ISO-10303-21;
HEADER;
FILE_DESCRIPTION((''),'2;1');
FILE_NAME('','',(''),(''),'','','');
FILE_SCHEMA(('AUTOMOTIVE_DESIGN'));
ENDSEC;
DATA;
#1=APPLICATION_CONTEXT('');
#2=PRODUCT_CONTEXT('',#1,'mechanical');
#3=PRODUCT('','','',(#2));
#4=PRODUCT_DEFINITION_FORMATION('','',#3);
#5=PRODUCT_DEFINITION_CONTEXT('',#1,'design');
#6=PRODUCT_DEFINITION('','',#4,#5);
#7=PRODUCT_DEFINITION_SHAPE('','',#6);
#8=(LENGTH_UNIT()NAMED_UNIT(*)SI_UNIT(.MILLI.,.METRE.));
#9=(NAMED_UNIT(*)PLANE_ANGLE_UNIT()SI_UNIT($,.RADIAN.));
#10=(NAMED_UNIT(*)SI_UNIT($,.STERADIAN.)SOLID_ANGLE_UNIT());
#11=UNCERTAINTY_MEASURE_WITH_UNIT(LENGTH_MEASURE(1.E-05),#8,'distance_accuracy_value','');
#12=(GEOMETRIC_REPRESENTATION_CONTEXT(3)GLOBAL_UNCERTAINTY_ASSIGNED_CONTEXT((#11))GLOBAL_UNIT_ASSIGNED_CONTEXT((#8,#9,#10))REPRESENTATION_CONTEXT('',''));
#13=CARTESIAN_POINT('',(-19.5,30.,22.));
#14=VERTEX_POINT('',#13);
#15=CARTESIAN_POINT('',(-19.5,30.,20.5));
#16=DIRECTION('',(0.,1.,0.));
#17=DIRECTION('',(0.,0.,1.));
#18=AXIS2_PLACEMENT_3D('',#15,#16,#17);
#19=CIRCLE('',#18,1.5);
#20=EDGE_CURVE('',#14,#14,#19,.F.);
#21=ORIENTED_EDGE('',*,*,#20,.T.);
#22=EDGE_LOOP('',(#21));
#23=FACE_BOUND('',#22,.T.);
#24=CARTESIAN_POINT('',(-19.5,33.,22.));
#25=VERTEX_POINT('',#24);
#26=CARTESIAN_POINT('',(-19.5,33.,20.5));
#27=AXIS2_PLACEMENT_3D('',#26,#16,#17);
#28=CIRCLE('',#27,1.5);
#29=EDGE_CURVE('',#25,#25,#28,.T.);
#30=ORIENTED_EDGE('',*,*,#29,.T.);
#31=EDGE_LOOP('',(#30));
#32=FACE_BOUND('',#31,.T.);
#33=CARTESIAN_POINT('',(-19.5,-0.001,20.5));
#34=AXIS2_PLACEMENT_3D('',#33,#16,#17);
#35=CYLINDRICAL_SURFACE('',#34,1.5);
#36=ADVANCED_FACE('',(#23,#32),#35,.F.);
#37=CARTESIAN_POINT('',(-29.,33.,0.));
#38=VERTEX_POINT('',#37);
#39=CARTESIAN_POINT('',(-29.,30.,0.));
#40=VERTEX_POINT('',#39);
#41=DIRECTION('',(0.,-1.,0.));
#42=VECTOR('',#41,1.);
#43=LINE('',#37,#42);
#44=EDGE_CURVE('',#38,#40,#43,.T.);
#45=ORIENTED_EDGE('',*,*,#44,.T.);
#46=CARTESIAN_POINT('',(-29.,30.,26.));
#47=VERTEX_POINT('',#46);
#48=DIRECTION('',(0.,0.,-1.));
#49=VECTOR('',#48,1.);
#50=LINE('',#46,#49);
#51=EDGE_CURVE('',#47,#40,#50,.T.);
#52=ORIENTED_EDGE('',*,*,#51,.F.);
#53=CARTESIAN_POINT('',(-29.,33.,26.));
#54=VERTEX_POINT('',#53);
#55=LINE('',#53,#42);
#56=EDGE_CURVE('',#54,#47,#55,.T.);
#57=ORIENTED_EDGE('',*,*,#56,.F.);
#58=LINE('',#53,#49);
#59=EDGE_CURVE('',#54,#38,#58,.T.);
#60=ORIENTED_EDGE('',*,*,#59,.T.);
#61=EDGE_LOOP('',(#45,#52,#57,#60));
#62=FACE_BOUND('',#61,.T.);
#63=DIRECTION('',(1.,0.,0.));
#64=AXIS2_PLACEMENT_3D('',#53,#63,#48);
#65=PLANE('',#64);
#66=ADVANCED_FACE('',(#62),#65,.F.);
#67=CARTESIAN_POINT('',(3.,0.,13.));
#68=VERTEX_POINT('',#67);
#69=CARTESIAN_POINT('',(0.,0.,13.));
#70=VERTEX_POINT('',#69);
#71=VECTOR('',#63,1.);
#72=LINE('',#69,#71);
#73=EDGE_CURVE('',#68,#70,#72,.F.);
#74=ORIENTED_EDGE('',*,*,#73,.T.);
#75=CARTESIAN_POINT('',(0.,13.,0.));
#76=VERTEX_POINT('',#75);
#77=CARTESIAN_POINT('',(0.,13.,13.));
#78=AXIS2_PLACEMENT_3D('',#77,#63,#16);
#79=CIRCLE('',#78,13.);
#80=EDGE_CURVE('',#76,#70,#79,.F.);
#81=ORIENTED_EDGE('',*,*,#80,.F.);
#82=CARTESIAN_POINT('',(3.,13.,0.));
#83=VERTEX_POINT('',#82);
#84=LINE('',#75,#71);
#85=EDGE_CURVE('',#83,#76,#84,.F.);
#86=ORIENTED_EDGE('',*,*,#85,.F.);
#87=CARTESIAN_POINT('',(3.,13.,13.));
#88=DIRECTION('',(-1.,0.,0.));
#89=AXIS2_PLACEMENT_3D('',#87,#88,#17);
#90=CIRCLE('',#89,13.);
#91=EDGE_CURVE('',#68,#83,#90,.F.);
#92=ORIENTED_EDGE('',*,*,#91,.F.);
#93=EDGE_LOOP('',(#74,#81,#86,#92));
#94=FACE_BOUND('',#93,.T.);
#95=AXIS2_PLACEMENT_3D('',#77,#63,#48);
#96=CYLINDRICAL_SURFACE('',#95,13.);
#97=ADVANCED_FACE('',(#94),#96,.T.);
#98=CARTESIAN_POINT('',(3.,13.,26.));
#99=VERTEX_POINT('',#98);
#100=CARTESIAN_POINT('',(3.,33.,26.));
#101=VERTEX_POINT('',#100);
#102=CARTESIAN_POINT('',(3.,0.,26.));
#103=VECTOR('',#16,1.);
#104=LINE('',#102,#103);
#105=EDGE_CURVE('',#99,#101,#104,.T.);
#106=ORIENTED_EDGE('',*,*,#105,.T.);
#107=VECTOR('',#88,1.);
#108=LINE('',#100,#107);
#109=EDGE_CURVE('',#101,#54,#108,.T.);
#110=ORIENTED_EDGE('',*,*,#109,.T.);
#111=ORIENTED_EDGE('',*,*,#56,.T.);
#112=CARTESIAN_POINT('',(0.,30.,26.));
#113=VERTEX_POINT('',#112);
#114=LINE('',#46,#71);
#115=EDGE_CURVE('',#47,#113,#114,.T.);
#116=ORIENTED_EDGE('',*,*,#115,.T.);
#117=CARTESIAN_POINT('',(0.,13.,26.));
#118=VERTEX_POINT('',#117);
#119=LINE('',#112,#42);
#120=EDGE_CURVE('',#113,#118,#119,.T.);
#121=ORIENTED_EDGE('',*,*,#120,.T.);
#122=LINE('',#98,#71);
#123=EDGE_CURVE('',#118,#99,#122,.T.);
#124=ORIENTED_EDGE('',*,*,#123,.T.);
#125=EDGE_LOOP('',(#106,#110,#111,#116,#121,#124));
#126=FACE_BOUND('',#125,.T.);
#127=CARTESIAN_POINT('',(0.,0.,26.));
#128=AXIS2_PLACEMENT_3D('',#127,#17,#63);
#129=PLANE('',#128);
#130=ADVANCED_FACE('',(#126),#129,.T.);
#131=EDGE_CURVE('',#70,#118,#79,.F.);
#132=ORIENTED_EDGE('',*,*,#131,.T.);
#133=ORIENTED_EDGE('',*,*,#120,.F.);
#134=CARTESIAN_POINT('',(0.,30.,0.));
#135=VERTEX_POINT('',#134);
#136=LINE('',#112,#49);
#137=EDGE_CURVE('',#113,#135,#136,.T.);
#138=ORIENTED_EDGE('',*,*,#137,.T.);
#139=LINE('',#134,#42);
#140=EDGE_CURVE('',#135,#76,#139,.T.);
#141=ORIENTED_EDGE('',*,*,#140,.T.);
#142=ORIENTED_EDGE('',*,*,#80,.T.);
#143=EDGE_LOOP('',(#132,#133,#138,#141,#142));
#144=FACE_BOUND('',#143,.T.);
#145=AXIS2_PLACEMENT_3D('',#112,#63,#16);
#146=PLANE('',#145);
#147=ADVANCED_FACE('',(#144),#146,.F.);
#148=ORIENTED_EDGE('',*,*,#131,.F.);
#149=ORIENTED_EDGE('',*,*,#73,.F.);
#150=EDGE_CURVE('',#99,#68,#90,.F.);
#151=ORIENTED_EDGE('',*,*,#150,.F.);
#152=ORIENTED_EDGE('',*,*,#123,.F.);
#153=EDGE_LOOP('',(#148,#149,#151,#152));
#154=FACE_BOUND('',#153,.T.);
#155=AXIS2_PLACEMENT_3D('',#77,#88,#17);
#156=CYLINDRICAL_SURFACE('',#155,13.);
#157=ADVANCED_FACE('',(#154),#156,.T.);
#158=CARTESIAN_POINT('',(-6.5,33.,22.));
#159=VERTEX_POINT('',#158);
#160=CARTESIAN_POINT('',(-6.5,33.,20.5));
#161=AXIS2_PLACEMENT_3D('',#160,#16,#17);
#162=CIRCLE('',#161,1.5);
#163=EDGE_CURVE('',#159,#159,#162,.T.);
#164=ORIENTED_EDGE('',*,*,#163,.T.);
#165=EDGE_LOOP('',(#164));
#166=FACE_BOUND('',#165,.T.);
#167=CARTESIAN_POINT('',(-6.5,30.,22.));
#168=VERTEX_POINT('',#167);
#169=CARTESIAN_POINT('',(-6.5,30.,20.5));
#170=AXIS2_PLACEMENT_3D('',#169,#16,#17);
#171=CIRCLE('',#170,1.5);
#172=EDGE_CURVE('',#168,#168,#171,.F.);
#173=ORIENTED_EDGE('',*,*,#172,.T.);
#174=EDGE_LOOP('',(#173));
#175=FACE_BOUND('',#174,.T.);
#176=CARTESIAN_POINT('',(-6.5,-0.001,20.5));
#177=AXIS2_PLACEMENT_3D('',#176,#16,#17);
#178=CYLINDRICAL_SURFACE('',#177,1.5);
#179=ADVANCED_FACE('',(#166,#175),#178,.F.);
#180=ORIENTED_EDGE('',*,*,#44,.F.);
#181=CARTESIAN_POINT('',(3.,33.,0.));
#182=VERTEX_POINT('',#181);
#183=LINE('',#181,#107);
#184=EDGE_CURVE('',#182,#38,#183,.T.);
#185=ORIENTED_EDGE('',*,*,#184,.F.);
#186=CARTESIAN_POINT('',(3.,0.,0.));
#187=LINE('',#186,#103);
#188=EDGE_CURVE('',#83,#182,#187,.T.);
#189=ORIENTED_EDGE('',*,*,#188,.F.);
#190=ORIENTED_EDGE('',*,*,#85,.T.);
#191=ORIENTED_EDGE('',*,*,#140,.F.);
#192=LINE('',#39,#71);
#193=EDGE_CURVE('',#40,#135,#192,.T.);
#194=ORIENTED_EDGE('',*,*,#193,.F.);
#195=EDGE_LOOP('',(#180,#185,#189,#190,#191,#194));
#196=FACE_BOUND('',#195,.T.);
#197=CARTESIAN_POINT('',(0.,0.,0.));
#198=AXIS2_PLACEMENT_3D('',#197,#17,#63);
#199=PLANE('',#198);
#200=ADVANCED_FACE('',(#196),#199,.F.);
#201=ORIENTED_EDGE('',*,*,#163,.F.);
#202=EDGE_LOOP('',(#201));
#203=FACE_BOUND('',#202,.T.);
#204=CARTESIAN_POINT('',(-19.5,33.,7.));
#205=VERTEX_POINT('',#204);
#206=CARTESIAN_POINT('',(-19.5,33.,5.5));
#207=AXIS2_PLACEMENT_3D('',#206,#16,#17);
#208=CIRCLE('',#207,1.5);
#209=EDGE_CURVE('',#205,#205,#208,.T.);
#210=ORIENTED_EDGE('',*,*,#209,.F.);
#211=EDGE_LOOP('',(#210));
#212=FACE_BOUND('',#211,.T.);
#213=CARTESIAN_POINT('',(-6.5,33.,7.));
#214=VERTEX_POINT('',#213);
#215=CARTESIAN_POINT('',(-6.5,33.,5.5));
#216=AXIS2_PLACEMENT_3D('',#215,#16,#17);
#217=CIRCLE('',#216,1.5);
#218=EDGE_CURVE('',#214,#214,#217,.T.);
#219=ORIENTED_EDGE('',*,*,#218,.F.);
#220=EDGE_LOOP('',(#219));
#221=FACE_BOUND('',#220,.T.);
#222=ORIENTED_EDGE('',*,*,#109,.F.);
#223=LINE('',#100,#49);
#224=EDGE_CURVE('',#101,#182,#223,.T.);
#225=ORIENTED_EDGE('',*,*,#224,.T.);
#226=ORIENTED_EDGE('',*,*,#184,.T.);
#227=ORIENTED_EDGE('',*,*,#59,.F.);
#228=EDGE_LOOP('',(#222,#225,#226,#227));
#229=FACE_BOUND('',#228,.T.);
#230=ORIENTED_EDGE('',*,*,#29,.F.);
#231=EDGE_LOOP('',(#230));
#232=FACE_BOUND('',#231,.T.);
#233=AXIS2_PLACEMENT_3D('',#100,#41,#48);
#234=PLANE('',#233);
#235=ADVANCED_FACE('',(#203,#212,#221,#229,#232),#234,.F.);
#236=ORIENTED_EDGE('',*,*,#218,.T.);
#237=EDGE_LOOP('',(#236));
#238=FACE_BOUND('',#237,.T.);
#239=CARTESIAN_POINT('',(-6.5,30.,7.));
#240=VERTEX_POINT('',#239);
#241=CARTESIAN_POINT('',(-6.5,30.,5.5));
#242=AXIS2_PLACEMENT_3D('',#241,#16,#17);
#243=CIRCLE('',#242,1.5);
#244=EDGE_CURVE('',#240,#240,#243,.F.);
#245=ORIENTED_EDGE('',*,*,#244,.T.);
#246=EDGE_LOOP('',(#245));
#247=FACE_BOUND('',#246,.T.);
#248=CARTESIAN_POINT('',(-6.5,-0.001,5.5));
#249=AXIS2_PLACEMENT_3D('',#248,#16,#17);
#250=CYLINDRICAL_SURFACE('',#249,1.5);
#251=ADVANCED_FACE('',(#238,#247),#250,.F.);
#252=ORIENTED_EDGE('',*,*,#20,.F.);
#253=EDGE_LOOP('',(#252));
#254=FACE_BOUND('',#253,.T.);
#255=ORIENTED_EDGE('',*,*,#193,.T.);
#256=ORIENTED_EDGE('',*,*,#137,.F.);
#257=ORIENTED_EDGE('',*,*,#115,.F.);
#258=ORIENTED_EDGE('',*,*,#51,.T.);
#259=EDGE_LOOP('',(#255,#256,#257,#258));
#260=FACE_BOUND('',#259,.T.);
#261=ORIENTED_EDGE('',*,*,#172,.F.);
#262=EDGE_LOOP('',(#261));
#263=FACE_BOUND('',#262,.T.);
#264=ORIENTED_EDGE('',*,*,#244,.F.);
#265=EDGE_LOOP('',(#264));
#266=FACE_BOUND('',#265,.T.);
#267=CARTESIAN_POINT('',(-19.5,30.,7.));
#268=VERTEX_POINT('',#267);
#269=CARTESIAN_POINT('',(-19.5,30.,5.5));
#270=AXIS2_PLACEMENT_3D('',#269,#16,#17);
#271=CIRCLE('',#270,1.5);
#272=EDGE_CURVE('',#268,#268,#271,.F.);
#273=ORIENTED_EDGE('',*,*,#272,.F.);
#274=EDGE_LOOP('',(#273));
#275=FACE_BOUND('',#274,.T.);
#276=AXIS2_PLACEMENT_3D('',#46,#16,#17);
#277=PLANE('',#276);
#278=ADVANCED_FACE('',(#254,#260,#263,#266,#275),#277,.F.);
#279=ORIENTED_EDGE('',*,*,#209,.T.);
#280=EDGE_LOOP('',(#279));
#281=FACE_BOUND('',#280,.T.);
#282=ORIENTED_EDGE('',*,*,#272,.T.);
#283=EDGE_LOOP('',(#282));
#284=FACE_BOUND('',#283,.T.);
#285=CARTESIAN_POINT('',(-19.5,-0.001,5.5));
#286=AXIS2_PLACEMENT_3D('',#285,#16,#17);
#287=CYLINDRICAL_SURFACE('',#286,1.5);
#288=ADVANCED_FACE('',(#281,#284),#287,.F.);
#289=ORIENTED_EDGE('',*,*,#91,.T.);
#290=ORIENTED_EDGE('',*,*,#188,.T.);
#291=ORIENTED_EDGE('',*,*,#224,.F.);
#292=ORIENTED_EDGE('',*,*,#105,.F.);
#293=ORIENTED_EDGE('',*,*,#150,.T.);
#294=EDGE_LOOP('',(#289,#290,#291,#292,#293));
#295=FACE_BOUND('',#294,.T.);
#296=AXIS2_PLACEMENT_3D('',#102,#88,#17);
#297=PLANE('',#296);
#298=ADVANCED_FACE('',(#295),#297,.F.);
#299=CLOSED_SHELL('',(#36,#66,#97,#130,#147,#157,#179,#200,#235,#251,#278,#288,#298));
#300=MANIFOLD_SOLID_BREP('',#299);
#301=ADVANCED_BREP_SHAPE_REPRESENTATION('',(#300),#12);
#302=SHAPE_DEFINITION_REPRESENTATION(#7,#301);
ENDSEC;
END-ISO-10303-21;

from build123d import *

# Parameters (mm, degrees)
BOSS_EXTRUDE1_DEPTH = 26
FILLET1_R           = 13
CUT_EXTRUDE1_REACH  = 53.049
SKETCH2_R           = 1.5


with BuildPart() as part:
    # Sketch1 → Boss-Extrude1 (new body)
    with BuildSketch(Plane.XY):
        Polygon((0, 0), (3, 0), (3, 33), (-29, 33), (-29, 30), (0, 30), align=None)
    extrude(amount=BOSS_EXTRUDE1_DEPTH)

    # Fillet1
    fillet1_edges = [part.edges().sort_by_distance(p)[0] for p in [
        (1.5, 0, 0),
        (1.5, 0, 26),
    ]]
    fillet(fillet1_edges, radius=FILLET1_R - 0.0001)  # a hair under: the kernel refuses the full size

    # Sketch2 → Cut-Extrude1 (cut, up to next)
    with BuildSketch(Plane(origin=(0, 33, 0), x_dir=(1, 0, 0), z_dir=(0, 1, 0)), mode=Mode.PRIVATE) as cut_extrude1_sk1:
        with Locations(Location((-19.5, -5.5, 0), (0, 0, 270))):
            Circle(SKETCH2_R)
    cut_extrude1_tool1 = extrude(cut_extrude1_sk1.sketch, amount=-CUT_EXTRUDE1_REACH, mode=Mode.PRIVATE) & part.part
    # Sketch2 → Cut-Extrude1 (cut, up to next)
    with BuildSketch(Plane(origin=(0, 33, 0), x_dir=(1, 0, 0), z_dir=(0, 1, 0)), mode=Mode.PRIVATE) as cut_extrude1_sk2:
        with Locations(Location((-19.5, -20.5, 0), (0, 0, 270))):
            Circle(SKETCH2_R)
    cut_extrude1_tool2 = extrude(cut_extrude1_sk2.sketch, amount=-CUT_EXTRUDE1_REACH, mode=Mode.PRIVATE) & part.part
    # Sketch2 → Cut-Extrude1 (cut, up to next)
    with BuildSketch(Plane(origin=(0, 33, 0), x_dir=(1, 0, 0), z_dir=(0, 1, 0)), mode=Mode.PRIVATE) as cut_extrude1_sk3:
        with Locations(Location((-6.5, -5.5, 0), (0, 0, 270))):
            Circle(SKETCH2_R)
    cut_extrude1_tool3 = extrude(cut_extrude1_sk3.sketch, amount=-CUT_EXTRUDE1_REACH, mode=Mode.PRIVATE) & part.part
    # Sketch2 → Cut-Extrude1 (cut, up to next)
    with BuildSketch(Plane(origin=(0, 33, 0), x_dir=(1, 0, 0), z_dir=(0, 1, 0)), mode=Mode.PRIVATE) as cut_extrude1_sk4:
        with Locations(Location((-6.5, -20.5, 0), (0, 0, 270))):
            Circle(SKETCH2_R)
    cut_extrude1_tool4 = extrude(cut_extrude1_sk4.sketch, amount=-CUT_EXTRUDE1_REACH, mode=Mode.PRIVATE) & part.part
    add(cut_extrude1_tool1.solids().sort_by_distance((-19.5, 33, 5.5))[0], mode=Mode.SUBTRACT)
    add(cut_extrude1_tool2.solids().sort_by_distance((-19.5, 33, 20.5))[0], mode=Mode.SUBTRACT)
    add(cut_extrude1_tool3.solids().sort_by_distance((-6.5, 33, 5.5))[0], mode=Mode.SUBTRACT)
    add(cut_extrude1_tool4.solids().sort_by_distance((-6.5, 33, 20.5))[0], mode=Mode.SUBTRACT)


solid = part.part
